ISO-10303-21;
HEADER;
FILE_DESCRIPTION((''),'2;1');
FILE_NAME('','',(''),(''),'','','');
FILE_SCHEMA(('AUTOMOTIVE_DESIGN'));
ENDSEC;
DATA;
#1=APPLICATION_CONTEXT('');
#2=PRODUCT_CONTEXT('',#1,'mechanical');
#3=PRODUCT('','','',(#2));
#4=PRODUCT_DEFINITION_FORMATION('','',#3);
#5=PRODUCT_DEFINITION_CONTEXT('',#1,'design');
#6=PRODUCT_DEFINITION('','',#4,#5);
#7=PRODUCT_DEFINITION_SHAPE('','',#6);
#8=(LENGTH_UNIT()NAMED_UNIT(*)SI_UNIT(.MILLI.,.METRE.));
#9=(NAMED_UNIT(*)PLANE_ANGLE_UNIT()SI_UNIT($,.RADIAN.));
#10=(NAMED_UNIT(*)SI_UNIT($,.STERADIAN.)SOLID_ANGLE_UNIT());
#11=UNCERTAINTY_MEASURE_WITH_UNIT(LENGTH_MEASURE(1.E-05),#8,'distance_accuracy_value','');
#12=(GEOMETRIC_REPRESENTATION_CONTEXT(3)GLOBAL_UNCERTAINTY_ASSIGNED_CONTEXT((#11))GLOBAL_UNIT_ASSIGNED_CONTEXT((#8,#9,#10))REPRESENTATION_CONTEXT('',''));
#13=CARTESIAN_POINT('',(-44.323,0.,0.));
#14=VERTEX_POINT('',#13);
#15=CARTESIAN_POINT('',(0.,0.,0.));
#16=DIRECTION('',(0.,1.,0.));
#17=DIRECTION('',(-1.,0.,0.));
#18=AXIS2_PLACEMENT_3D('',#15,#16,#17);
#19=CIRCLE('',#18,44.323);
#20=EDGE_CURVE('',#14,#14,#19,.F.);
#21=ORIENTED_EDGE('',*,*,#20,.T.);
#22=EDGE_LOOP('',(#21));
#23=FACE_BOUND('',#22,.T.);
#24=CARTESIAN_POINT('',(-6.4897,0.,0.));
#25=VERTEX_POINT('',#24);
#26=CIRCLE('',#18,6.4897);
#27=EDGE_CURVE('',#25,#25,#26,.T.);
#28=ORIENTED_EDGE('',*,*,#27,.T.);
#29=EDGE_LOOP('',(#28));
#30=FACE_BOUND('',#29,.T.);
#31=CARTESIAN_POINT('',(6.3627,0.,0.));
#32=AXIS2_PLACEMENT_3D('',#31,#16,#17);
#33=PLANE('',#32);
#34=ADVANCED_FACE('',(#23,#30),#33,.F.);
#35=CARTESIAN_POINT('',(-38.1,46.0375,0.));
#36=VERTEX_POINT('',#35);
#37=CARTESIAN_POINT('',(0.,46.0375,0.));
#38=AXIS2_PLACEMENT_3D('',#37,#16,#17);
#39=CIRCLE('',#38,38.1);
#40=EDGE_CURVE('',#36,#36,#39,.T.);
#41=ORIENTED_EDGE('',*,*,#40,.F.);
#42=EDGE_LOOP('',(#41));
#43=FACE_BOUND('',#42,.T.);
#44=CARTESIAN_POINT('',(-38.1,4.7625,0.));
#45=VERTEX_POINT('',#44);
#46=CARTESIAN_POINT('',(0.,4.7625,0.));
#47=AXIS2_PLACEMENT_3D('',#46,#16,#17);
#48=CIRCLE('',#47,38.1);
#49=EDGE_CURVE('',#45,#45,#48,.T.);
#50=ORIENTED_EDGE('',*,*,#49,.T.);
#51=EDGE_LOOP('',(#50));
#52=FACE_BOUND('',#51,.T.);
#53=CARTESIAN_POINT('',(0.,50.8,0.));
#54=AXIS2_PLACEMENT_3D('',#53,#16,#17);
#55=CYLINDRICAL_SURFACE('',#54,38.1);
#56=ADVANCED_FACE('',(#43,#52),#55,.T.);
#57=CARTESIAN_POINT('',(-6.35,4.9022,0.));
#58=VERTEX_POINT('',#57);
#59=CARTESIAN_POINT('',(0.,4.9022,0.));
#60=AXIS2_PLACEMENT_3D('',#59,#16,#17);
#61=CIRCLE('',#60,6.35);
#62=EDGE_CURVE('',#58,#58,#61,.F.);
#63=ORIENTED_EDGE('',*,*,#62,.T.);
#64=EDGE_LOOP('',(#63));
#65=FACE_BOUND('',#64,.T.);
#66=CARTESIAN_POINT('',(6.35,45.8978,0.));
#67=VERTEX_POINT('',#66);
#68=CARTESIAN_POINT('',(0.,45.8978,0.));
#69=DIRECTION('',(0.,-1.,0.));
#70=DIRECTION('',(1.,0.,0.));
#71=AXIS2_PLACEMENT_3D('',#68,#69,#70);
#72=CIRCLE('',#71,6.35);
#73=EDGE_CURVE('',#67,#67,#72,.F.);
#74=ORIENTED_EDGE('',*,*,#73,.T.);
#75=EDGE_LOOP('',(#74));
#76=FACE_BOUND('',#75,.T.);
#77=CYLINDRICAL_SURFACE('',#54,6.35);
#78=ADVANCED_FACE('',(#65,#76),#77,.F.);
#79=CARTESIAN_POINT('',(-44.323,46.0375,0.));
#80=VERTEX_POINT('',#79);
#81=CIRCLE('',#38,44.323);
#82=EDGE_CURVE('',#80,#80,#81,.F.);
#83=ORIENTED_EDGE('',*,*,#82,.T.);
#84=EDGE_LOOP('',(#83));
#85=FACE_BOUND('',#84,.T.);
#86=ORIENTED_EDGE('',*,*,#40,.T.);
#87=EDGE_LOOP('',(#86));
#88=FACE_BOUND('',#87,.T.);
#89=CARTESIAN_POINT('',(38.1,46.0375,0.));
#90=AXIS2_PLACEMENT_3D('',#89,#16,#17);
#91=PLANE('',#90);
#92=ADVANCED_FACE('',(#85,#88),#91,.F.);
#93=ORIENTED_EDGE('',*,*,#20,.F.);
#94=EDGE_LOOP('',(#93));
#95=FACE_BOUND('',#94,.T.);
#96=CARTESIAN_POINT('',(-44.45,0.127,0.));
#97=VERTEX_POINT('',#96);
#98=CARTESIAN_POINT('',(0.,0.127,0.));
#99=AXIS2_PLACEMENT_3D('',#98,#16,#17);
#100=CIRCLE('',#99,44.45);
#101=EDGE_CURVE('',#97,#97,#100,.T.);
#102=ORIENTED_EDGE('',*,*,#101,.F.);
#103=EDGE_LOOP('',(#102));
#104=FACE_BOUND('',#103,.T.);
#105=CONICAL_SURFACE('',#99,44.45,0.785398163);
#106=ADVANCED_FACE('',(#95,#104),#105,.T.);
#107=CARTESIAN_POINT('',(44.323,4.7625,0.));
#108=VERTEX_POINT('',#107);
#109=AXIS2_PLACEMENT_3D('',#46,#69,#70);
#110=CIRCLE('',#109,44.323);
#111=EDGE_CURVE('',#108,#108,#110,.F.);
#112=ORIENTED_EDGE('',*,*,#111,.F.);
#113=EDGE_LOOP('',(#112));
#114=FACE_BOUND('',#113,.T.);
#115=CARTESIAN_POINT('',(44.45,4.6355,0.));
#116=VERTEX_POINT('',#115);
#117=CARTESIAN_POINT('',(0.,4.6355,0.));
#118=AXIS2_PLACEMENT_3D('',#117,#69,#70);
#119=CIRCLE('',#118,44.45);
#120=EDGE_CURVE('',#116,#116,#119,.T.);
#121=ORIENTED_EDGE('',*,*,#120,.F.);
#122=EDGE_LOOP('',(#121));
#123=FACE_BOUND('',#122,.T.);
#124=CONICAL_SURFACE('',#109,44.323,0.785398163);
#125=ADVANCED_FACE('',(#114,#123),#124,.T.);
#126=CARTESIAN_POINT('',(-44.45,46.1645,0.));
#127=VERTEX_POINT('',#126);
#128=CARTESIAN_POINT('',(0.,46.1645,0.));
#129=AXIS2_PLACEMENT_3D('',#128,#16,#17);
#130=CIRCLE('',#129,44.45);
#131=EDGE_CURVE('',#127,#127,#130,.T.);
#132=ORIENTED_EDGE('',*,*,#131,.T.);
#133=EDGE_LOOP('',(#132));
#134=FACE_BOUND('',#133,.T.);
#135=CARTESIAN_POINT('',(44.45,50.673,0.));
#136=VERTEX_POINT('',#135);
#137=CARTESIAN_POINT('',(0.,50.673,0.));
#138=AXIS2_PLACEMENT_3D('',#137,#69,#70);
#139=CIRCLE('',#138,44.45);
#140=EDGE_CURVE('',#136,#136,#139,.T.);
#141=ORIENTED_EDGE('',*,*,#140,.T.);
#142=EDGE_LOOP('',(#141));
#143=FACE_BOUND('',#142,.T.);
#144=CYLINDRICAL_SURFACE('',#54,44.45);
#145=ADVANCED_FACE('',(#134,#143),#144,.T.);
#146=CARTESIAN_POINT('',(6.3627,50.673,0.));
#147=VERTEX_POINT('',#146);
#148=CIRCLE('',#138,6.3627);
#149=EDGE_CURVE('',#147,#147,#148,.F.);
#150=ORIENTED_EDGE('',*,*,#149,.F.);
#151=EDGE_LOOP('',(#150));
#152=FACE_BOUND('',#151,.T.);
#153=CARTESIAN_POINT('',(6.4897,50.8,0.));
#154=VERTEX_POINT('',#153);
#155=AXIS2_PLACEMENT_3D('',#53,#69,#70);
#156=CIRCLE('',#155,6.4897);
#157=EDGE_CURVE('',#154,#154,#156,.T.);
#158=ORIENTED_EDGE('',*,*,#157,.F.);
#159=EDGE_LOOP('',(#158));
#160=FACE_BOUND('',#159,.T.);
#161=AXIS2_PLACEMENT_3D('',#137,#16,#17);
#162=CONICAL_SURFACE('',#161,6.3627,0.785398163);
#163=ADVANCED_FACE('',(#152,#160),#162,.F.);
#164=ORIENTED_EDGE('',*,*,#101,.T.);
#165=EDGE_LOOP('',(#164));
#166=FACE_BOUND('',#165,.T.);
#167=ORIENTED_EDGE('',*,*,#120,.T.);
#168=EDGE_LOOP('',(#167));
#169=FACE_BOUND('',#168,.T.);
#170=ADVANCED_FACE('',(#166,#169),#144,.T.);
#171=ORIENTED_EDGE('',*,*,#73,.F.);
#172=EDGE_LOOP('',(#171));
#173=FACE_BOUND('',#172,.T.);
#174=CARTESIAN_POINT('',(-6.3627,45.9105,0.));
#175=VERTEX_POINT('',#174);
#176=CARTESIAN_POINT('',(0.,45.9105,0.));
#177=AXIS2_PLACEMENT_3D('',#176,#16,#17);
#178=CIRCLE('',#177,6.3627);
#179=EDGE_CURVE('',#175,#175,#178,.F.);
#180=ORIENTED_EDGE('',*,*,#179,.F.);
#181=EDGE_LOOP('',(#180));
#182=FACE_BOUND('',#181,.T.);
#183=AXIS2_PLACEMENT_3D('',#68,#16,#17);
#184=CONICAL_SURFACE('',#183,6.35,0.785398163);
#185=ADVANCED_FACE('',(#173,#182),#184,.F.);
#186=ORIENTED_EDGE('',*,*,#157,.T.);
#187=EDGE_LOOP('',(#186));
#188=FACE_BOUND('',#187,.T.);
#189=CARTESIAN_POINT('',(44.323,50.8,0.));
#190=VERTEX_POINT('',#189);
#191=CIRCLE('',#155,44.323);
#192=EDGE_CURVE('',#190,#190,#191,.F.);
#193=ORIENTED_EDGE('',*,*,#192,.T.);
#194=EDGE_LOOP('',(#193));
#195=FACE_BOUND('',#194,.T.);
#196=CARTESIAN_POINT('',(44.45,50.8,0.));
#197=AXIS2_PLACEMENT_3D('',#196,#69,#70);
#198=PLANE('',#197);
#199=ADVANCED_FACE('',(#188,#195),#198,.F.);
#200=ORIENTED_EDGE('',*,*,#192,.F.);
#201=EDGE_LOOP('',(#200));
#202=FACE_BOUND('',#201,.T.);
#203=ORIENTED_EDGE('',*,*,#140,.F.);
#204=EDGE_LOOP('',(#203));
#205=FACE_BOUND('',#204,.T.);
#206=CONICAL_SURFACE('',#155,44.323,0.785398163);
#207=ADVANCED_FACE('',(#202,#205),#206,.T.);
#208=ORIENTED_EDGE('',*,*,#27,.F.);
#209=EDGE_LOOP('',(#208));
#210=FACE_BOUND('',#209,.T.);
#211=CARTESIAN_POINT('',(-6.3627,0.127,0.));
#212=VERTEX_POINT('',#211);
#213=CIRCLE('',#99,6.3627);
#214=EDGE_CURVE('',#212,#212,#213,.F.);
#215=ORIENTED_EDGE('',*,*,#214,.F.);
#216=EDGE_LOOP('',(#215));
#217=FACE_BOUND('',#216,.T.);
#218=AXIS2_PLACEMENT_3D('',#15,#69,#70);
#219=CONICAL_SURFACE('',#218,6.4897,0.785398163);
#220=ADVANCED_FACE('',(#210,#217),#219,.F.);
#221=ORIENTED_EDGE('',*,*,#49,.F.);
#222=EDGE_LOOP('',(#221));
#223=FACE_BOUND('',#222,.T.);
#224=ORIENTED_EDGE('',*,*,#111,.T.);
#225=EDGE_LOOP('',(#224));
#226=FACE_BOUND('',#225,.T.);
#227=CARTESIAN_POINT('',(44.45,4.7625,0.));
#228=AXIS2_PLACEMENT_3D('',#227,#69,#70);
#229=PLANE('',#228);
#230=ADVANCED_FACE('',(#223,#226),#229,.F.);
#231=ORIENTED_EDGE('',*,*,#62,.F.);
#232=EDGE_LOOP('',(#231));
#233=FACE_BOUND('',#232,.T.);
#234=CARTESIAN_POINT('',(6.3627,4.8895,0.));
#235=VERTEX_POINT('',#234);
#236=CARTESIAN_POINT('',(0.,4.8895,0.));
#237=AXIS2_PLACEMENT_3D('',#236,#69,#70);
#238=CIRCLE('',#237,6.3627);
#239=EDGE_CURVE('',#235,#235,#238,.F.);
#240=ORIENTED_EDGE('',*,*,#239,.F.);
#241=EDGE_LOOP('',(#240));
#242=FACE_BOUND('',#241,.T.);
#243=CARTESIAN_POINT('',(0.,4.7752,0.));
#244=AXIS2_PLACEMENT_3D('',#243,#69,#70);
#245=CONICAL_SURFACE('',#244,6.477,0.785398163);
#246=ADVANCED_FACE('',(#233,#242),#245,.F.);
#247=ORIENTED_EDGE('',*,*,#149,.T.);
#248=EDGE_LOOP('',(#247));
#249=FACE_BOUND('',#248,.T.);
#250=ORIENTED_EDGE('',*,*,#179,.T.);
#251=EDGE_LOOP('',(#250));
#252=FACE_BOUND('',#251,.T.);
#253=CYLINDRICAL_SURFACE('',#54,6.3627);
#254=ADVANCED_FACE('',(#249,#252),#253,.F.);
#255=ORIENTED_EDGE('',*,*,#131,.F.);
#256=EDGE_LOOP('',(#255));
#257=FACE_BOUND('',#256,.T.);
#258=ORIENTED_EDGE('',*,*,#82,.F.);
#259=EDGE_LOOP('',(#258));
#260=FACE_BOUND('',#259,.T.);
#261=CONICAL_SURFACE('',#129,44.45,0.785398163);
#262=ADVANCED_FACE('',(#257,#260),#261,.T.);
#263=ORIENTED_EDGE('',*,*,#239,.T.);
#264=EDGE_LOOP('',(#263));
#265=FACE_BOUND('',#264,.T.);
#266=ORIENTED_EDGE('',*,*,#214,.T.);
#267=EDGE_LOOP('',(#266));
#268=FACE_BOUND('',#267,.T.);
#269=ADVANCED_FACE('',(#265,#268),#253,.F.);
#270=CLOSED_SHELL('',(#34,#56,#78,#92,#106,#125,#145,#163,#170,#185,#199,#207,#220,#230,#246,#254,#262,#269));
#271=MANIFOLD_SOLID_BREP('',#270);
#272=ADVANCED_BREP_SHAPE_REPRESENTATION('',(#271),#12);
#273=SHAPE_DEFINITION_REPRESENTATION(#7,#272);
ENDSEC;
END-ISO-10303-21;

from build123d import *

# Parameters (mm, degrees)
CHAMFER1_SIZE = 0.127


with BuildPart() as part:
    # Sketch1 → Revolve1 (revolve)
    with BuildSketch(Plane.XY, mode=Mode.PRIVATE) as revolve1_sk:
        Polygon((6.3627, 0), (44.45, 0), (44.45, 4.7625), (38.1, 4.7625), (38.1, 46.0375), (44.45, 46.0375), (44.45, 50.8), (6.3627, 50.8), (6.3627, 46.0248), (6.35, 46.0248), (6.35, 4.7752), (6.3627, 4.7752), align=None)
    revolve(revolve1_sk.sketch.rotate(Axis((0, 50.8, 0), (0, -1, 0)), 180), axis=Axis((0, 50.8, 0), (0, -1, 0)))

    # Chamfer1
    # the kernel refuses this chamfer: 0.127 mm, written as the material it takes off along each edge
    with BuildSketch(Plane(origin=(0, 46.0375, 0), x_dir=(-1, 0, 0), z_dir=(0, 0, 1))) as chamfer1_piece_1:
        Polygon((44.45 - CHAMFER1_SIZE, 0), (44.45, -CHAMFER1_SIZE), (44.45, 0), align=None)
    revolve(axis=Axis((0, 46.0375, 0), (0, -1, 0)), mode=Mode.SUBTRACT)
    with BuildSketch(Plane(origin=(0, 4.7625, 0), x_dir=(-1, 0, 0), z_dir=(0, 0, 1))) as chamfer1_piece_2:
        Polygon((44.45, CHAMFER1_SIZE), (44.45 - CHAMFER1_SIZE, 0), (44.45, 0), align=None)
    revolve(axis=Axis((0, 4.7625, 0), (0, -1, 0)), mode=Mode.SUBTRACT)
    with BuildSketch(Plane(origin=(0, 0, 0), x_dir=(-1, 0, 0), z_dir=(0, 0, 1))) as chamfer1_piece_3:
        Polygon((6.3627 + CHAMFER1_SIZE, 0), (6.3627, -CHAMFER1_SIZE), (6.3627, 0), align=None)
    revolve(axis=Axis((0, 0, 0), (0, -1, 0)), mode=Mode.SUBTRACT)
    with BuildSketch(Plane(origin=(0, 0, 0), x_dir=(-1, 0, 0), z_dir=(0, 0, 1))) as chamfer1_piece_4:
        Polygon((44.45 - CHAMFER1_SIZE, 0), (44.45, -CHAMFER1_SIZE), (44.45, 0), align=None)
    revolve(axis=Axis((0, 0, 0), (0, -1, 0)), mode=Mode.SUBTRACT)
    with BuildSketch(Plane(origin=(0, 46.0248, 0), x_dir=(-1, 0, 0), z_dir=(0, 0, 1))) as chamfer1_piece_5_section:
        Polygon((6.35 + CHAMFER1_SIZE, 0), (6.35, CHAMFER1_SIZE), (6.35, 0), align=None)
    chamfer1_piece_5 = revolve(axis=Axis((0, 46.0248, 0), (0, -1, 0)), mode=Mode.PRIVATE)
    chamfer1_piece_5 = chamfer1_piece_5 & Plane(origin=(0, 45.905383225, 0), x_dir=(-1, 0, 0), z_dir=(0, -1, 0)) * Cylinder(6.3627, 26, mode=Mode.PRIVATE)
    add(chamfer1_piece_5, mode=Mode.SUBTRACT)
    with BuildSketch(Plane(origin=(0, 4.7752, 0), x_dir=(-1, 0, 0), z_dir=(0, 0, 1))) as chamfer1_piece_6_section:
        Polygon((6.35, -CHAMFER1_SIZE), (6.35 + CHAMFER1_SIZE, 0), (6.35, 0), align=None)
    chamfer1_piece_6 = revolve(axis=Axis((0, 4.7752, 0), (0, -1, 0)), mode=Mode.PRIVATE)
    chamfer1_piece_6 = chamfer1_piece_6 & Plane(origin=(0, 4.894616775, 0), x_dir=(-1, 0, 0), z_dir=(0, -1, 0)) * Cylinder(6.3627, 26, mode=Mode.PRIVATE)
    add(chamfer1_piece_6, mode=Mode.SUBTRACT)
    with BuildSketch(Plane(origin=(0, 50.8, 0), x_dir=(-1, 0, 0), z_dir=(0, 0, 1))) as chamfer1_piece_7:
        Polygon((44.45, CHAMFER1_SIZE), (44.45 - CHAMFER1_SIZE, 0), (44.45, 0), align=None)
    revolve(axis=Axis((0, 50.8, 0), (0, -1, 0)), mode=Mode.SUBTRACT)
    with BuildSketch(Plane(origin=(0, 50.8, 0), x_dir=(-1, 0, 0), z_dir=(0, 0, 1))) as chamfer1_piece_8:
        Polygon((6.3627 + CHAMFER1_SIZE, 0), (6.3627, CHAMFER1_SIZE), (6.3627, 0), align=None)
    revolve(axis=Axis((0, 50.8, 0), (0, -1, 0)), mode=Mode.SUBTRACT)


solid = part.part
